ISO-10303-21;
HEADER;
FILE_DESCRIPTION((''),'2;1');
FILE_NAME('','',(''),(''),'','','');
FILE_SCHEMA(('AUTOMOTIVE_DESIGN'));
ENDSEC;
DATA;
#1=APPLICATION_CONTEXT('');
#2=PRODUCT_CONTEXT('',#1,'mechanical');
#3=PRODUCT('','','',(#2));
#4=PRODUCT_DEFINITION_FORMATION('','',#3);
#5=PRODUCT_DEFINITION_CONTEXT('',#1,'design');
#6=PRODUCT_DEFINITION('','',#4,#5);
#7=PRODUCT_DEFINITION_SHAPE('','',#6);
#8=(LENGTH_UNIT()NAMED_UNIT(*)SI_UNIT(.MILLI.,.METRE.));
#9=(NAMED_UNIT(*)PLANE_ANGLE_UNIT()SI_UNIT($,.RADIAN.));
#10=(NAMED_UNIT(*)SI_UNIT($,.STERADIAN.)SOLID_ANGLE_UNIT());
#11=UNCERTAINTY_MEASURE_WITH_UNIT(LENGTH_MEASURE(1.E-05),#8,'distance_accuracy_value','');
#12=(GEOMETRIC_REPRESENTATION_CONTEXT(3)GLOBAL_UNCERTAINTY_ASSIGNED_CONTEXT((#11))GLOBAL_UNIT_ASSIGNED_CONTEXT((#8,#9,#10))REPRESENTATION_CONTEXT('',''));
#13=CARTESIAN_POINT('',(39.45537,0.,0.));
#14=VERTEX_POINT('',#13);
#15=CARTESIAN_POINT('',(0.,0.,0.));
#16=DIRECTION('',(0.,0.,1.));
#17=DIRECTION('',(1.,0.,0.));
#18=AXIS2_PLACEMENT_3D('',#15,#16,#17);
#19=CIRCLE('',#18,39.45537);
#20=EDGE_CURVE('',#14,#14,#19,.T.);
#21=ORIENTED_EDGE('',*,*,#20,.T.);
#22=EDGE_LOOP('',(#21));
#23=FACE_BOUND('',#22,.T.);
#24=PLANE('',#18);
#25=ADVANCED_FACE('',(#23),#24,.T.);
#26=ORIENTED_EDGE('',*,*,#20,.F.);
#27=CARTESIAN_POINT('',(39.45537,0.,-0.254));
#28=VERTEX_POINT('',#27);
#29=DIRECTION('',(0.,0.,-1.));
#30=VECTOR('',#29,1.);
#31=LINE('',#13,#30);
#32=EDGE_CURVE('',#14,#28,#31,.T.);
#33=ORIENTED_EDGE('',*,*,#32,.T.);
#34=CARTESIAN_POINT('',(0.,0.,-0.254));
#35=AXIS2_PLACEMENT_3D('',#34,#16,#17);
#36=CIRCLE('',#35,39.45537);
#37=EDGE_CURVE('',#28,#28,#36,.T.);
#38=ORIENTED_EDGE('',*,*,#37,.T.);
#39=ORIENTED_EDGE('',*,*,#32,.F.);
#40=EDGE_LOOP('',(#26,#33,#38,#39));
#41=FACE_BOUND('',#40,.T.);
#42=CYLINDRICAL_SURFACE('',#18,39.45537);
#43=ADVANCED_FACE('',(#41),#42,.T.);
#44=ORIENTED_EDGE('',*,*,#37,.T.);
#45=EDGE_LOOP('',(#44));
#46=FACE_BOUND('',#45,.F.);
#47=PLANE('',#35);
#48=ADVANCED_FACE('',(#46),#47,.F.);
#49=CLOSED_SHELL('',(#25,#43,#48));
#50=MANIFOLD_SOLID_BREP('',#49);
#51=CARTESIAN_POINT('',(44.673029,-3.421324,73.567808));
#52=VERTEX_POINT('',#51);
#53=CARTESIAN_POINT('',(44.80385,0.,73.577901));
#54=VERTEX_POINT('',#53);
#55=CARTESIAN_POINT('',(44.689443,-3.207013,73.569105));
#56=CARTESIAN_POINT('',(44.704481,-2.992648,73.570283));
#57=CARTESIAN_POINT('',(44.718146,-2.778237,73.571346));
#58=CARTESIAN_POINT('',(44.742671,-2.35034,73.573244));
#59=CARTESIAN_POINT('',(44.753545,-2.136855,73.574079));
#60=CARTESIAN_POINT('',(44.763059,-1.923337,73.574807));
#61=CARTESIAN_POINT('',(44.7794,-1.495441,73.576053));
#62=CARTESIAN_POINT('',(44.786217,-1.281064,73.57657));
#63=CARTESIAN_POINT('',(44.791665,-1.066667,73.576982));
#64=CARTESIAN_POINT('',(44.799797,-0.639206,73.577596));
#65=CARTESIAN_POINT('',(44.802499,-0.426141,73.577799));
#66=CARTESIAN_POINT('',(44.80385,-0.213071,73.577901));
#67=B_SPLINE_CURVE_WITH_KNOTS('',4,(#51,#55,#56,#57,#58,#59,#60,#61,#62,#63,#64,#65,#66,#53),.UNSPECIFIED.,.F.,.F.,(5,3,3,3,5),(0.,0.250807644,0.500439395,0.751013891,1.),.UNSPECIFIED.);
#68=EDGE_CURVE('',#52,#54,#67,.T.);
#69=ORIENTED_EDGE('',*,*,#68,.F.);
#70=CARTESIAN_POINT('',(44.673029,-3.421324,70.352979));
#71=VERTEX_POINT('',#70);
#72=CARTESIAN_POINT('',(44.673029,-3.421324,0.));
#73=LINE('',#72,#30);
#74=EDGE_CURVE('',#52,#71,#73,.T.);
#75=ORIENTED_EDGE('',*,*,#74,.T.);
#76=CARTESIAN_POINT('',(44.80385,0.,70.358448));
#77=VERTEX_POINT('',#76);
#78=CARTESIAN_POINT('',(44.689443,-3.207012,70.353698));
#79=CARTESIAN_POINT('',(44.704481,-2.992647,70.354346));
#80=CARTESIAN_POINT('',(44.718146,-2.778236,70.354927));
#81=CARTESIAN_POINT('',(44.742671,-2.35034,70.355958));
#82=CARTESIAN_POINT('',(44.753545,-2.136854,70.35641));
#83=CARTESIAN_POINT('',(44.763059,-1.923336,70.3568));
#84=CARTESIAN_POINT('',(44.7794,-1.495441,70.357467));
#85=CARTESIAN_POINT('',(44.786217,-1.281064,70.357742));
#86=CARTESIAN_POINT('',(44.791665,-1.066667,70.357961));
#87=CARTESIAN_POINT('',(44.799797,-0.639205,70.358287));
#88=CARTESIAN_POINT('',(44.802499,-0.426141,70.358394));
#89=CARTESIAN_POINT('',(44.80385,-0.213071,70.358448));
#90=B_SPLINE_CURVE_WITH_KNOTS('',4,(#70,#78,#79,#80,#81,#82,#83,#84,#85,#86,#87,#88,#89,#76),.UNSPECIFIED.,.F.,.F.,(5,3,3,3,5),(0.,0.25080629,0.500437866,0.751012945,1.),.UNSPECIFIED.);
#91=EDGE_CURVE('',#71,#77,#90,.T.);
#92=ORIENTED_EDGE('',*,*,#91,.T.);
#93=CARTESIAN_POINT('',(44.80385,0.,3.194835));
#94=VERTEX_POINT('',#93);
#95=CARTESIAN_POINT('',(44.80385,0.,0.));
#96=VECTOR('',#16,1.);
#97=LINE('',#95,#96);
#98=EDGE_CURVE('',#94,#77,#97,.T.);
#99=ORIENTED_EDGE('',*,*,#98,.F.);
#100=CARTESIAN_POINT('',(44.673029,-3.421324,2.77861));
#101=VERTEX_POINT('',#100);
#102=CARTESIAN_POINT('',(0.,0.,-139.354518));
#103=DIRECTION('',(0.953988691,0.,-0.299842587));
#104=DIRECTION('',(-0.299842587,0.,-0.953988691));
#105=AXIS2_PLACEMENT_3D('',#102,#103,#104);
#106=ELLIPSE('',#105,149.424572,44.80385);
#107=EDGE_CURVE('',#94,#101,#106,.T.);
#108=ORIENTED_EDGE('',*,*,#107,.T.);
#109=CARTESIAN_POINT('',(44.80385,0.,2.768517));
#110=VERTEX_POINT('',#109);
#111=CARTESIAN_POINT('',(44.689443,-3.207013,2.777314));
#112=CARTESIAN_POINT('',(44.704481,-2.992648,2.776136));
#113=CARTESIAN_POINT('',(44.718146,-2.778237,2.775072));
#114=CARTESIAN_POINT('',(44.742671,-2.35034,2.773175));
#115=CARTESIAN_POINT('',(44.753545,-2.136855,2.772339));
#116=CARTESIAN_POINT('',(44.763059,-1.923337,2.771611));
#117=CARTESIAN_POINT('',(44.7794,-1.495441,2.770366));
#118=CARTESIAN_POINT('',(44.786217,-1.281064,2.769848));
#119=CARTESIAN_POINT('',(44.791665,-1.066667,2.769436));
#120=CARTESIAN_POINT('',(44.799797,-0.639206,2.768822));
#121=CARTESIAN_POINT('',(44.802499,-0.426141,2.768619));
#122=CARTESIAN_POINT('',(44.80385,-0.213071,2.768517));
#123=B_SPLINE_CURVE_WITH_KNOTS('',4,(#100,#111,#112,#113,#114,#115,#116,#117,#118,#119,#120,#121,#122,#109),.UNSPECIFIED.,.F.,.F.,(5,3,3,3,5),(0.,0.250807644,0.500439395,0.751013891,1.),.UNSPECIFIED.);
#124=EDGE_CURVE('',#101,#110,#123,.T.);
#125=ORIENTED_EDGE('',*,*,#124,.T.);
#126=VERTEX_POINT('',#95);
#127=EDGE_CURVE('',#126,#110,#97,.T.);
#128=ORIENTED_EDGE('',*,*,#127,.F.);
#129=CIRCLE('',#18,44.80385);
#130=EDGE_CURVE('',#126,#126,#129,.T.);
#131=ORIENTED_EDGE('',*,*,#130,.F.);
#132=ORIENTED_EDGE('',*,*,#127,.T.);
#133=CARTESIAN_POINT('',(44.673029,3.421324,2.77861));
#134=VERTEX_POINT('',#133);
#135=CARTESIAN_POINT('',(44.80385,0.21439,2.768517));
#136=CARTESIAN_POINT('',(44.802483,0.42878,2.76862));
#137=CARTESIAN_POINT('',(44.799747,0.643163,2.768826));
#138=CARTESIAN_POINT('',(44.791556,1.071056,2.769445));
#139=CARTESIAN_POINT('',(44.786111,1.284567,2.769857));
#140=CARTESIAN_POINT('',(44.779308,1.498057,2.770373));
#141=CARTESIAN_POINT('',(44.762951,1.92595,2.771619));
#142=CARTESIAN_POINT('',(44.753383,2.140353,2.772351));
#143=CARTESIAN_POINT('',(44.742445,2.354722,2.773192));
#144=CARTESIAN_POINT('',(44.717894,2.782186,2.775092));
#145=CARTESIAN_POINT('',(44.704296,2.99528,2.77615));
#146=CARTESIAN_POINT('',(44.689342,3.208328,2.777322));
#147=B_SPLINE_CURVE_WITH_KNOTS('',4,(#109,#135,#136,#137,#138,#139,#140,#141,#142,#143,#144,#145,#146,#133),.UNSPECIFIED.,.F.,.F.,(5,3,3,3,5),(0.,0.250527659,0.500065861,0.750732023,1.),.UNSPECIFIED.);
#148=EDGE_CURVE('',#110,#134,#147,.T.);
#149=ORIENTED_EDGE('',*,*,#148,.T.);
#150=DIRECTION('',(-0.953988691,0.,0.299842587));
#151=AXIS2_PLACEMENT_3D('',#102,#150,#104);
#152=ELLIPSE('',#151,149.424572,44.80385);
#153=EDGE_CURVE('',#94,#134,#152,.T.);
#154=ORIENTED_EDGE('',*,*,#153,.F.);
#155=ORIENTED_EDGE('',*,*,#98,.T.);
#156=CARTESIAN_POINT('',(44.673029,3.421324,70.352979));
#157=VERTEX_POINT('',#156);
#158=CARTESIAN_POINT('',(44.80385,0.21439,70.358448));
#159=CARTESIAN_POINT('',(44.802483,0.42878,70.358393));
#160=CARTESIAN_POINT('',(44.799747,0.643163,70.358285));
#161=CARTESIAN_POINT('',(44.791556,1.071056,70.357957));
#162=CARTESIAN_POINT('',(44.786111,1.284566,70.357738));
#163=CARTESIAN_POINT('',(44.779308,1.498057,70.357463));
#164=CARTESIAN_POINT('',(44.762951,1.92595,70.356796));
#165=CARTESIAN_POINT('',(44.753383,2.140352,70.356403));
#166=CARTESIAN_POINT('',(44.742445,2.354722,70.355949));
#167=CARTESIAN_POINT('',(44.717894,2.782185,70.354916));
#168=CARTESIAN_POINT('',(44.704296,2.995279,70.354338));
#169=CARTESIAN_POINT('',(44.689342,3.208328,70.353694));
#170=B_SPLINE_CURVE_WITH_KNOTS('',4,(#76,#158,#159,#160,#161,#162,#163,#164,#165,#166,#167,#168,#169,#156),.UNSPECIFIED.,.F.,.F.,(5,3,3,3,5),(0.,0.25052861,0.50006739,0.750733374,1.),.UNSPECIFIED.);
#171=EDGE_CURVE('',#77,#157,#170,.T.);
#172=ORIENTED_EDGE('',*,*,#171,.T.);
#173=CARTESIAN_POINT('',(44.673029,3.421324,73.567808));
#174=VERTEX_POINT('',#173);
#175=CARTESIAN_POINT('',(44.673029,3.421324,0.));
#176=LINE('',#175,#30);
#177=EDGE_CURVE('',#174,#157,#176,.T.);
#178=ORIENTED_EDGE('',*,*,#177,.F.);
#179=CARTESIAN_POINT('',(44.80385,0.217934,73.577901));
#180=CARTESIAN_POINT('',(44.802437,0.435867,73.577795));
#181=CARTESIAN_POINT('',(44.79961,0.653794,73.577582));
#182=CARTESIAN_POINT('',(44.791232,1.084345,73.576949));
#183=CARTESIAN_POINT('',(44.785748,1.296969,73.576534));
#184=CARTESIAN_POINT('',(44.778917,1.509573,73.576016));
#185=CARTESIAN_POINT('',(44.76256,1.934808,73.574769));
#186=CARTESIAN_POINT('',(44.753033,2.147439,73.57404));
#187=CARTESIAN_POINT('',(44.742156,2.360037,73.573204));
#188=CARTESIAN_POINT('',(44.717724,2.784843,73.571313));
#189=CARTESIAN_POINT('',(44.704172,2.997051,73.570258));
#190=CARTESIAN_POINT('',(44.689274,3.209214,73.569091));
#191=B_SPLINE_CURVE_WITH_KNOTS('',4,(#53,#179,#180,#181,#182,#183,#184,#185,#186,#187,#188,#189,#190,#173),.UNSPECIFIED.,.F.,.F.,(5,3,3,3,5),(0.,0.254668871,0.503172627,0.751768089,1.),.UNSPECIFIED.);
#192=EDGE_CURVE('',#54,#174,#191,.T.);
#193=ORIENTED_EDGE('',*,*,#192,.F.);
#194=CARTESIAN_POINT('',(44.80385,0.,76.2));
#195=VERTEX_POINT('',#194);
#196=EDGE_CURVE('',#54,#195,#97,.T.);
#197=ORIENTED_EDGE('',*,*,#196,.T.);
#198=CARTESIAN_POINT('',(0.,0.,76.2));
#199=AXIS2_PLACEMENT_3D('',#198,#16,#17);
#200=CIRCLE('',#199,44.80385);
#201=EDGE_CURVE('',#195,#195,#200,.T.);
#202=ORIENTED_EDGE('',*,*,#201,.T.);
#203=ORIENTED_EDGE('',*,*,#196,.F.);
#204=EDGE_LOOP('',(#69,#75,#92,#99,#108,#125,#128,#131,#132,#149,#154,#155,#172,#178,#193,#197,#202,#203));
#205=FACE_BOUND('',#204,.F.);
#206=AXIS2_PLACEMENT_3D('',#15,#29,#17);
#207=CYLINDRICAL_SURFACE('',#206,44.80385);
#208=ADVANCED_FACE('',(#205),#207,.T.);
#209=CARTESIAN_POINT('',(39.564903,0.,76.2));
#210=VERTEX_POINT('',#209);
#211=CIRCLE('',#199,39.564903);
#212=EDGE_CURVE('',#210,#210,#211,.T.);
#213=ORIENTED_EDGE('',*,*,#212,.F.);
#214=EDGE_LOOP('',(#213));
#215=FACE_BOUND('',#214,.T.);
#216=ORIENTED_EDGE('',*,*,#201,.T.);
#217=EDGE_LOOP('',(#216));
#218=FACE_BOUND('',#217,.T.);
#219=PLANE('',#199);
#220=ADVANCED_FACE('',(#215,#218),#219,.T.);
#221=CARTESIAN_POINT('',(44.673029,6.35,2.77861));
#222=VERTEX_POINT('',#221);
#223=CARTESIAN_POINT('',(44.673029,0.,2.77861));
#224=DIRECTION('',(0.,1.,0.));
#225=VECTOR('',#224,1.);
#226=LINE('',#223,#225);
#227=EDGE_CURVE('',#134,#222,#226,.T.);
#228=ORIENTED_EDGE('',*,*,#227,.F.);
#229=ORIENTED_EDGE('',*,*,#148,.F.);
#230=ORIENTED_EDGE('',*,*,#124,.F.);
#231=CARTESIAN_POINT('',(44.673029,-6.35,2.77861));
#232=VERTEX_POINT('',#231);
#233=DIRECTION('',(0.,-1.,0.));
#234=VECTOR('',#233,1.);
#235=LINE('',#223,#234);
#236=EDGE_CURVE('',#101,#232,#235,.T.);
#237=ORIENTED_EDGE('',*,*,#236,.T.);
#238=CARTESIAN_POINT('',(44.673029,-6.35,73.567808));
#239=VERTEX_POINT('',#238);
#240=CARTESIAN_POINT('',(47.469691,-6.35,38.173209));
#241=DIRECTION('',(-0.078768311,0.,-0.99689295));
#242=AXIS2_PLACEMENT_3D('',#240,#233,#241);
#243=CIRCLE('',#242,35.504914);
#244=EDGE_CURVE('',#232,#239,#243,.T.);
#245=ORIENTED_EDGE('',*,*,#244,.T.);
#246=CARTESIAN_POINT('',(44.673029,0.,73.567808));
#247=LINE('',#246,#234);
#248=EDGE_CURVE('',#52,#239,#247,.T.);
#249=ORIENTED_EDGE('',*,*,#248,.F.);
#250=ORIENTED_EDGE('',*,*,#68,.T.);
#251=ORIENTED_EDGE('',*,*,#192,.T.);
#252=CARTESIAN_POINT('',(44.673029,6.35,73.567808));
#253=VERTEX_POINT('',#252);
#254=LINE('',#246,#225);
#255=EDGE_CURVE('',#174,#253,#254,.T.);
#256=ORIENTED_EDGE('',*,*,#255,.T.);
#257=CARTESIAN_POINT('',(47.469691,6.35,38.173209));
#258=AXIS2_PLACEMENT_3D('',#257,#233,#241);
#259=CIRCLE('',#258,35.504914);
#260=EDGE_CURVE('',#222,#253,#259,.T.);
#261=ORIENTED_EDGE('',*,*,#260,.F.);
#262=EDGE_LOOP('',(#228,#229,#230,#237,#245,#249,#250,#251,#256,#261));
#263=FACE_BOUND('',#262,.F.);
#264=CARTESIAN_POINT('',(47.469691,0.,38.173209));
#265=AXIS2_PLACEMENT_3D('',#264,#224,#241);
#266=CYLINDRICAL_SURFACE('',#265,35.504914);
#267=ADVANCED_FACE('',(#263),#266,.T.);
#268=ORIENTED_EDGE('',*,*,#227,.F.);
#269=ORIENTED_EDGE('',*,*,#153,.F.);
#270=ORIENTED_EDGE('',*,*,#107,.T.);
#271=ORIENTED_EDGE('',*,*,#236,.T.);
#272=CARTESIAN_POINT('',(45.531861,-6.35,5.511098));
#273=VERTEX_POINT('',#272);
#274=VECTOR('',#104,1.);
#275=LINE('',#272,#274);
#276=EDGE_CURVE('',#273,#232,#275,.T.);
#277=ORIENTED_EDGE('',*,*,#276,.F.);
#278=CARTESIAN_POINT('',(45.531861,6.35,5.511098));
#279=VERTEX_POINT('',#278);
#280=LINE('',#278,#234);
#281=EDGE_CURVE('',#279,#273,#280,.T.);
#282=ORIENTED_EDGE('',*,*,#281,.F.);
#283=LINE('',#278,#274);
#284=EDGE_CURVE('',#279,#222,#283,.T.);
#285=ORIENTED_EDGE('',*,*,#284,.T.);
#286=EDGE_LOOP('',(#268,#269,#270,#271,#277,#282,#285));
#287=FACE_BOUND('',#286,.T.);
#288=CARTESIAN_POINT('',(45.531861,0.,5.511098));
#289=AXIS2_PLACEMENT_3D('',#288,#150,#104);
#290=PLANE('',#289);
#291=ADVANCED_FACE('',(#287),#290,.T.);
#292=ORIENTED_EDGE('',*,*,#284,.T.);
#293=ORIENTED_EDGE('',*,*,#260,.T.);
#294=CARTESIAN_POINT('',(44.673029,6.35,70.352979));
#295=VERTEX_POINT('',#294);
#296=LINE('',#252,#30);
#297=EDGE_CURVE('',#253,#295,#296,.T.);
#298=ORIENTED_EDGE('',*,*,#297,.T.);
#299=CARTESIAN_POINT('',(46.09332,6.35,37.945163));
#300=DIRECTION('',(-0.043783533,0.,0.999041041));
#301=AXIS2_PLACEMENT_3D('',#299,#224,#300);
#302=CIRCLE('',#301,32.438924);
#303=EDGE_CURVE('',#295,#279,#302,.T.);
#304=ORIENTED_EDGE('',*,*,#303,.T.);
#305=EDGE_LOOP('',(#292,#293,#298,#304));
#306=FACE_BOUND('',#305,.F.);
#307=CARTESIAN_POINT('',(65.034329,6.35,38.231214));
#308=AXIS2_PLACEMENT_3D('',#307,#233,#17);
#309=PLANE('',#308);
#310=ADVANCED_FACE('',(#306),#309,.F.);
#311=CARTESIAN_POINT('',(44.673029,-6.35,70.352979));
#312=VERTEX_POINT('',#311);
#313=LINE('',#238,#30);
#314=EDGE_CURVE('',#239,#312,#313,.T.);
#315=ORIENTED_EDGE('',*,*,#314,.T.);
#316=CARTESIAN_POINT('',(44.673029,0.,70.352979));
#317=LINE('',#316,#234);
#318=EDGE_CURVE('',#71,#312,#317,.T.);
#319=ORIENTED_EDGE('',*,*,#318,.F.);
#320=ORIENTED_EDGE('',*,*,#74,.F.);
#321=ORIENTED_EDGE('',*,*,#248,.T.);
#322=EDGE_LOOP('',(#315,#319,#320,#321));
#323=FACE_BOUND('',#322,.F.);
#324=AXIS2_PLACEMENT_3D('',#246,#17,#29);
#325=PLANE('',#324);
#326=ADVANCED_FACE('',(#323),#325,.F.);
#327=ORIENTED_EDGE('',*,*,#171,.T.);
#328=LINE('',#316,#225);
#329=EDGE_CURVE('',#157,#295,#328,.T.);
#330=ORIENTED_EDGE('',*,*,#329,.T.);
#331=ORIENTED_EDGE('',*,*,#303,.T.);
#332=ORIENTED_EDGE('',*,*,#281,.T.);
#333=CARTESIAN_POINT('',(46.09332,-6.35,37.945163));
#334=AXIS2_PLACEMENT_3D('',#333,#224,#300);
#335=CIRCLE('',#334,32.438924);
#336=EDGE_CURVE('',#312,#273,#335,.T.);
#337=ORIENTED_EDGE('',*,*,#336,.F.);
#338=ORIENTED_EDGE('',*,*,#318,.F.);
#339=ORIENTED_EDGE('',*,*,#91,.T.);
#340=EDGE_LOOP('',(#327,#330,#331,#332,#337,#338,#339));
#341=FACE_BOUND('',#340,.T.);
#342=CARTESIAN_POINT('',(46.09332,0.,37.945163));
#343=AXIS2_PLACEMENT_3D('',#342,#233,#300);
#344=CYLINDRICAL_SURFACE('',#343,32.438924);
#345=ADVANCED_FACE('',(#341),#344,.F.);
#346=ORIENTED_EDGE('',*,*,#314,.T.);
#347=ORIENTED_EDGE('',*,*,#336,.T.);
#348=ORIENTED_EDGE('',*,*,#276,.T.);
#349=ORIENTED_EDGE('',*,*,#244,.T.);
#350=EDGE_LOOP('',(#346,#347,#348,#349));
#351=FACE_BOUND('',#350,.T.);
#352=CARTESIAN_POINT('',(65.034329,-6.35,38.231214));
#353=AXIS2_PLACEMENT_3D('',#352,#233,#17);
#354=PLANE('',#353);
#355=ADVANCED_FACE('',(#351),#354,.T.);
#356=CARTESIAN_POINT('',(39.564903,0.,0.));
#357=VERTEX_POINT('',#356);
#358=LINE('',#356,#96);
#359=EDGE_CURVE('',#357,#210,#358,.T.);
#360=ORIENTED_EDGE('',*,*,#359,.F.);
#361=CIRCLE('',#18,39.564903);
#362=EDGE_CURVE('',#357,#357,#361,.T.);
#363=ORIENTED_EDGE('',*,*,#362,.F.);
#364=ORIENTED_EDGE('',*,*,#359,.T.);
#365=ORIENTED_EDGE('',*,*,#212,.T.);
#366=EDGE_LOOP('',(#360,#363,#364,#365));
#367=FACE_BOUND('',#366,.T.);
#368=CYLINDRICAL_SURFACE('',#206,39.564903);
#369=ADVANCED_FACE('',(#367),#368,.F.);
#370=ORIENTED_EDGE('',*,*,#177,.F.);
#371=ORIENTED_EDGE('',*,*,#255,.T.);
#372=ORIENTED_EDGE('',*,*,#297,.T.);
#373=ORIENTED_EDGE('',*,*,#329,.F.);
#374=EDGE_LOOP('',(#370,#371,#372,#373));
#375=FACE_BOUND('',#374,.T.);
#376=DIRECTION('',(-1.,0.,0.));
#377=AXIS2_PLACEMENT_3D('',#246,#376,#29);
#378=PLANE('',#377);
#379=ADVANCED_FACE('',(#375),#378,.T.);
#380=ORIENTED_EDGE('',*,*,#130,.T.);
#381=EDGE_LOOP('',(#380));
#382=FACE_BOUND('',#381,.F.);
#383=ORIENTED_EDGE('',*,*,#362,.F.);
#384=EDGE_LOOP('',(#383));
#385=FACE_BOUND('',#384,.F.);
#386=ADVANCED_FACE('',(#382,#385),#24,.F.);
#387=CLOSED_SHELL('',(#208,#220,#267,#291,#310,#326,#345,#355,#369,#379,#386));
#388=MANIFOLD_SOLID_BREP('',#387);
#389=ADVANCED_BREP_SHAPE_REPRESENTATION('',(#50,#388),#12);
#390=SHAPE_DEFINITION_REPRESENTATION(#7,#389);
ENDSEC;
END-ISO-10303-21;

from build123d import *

# Parameters (mm, degrees)
F0_R          = 44.803850357
F0_R_2        = 39.5649031507
F1_DEPTH      = 76.2
F0_R_3        = 39.4553703488
F2_DEPTH      = 0.254
F4_DEPTH      = 6.35
F4_DEPTH_BACK = 6.35


# Not quite as in the source:
# - the program builds the solid bodies; features that only make, move or delete a surface that nothing else refers to are left out


with BuildPart() as f1:
    # F0 (on Top) → F1 (new body)
    with BuildSketch(Plane.XY):
        Circle(F0_R)
        Circle(F0_R_2, mode=Mode.SUBTRACT)
    extrude(amount=F1_DEPTH)

    # F3 (on Front) → F4 (join, two sides)
    with BuildSketch(Plane.XZ) as f4_sk:
        with BuildLine():
            ThreePointArc((44.6730293334, 70.3529790044), (78.5293989005, 38.3747792802), (45.5318614841, 5.5110980757))
            Line((45.5318614841, 5.5110980757), (44.6730293334, 2.7786104474))
            ThreePointArc((44.6730293334, 2.7786104474), (82.974605628, 38.1732090609), (44.6730293334, 73.5678076744))
            Line((44.6730293334, 73.5678076744), (44.6730293334, 70.3529790044))
        make_face()
    extrude(amount=F4_DEPTH)
    extrude(f4_sk.sketch, amount=-F4_DEPTH_BACK)


with BuildPart() as f2:
    # F0 (on Top) → F2 (new body)
    with BuildSketch(Plane.XY):
        Circle(F0_R_3)
    extrude(amount=-F2_DEPTH)


solid = Compound([f1.part, f2.part])
